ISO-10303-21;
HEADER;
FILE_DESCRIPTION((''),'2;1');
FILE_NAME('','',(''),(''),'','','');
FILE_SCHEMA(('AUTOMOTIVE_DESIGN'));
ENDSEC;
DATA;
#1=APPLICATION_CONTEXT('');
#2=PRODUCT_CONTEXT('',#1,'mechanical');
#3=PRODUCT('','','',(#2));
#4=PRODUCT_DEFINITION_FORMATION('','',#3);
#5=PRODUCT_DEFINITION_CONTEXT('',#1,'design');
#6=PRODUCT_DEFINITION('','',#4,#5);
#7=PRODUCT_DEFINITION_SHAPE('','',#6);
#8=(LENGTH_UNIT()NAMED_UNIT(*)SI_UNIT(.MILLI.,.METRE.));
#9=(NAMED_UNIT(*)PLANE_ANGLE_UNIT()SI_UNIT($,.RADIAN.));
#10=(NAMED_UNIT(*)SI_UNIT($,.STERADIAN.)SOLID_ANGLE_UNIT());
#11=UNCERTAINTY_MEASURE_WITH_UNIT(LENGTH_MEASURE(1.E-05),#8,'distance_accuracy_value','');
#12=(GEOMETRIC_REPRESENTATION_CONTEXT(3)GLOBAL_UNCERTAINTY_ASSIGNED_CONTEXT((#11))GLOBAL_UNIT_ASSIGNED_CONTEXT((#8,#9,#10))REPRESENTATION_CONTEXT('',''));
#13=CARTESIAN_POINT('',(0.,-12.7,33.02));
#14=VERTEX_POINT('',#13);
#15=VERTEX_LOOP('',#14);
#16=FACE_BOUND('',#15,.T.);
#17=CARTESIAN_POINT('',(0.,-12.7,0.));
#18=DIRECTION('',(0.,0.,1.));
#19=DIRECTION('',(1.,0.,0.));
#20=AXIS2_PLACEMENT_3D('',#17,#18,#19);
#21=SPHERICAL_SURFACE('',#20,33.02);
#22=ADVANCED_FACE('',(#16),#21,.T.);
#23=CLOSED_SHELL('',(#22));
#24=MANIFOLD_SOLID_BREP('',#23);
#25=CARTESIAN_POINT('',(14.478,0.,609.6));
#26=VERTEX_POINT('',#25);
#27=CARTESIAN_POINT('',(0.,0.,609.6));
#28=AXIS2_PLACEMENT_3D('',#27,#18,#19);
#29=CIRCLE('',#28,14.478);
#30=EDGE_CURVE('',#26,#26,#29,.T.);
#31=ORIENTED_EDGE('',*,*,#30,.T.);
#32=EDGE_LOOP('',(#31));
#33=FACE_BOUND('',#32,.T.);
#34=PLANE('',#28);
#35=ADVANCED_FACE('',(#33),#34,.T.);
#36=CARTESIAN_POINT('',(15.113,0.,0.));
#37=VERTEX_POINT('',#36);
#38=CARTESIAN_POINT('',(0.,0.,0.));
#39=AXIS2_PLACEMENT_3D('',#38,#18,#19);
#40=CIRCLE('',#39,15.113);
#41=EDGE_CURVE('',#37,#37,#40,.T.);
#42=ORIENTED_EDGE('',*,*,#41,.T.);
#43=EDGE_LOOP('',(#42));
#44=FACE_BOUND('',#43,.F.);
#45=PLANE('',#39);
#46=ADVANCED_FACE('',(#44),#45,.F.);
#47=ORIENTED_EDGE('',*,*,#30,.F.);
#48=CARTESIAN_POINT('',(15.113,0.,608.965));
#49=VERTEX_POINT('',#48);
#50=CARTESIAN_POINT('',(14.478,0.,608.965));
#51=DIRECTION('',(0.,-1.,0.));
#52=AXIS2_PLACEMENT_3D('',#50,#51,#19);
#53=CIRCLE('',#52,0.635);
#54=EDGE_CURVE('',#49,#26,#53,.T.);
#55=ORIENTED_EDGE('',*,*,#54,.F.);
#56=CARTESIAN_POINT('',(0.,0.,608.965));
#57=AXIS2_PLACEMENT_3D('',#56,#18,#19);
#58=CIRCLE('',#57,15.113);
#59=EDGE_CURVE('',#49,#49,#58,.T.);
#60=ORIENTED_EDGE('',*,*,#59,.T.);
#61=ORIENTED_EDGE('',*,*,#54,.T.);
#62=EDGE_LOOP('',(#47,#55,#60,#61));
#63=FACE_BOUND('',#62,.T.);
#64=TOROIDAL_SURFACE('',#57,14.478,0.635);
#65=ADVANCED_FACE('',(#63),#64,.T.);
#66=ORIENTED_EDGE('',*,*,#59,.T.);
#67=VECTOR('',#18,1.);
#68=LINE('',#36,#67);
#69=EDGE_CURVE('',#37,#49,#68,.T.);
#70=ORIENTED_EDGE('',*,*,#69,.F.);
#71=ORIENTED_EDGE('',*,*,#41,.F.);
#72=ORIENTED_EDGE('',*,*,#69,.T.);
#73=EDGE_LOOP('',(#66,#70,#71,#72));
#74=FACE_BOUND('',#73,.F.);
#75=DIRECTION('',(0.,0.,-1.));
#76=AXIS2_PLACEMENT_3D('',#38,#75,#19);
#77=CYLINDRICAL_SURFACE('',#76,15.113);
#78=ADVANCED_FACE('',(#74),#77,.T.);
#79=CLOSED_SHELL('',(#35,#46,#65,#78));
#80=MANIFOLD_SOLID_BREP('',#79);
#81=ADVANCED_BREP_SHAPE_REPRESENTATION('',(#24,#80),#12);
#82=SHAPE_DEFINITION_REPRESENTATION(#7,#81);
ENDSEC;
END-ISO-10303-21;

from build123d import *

# Parameters (mm, degrees)
F0_R     = 15.113
F1_DEPTH = 609.6
F2_R     = 0.635


# Not quite as in the source:
# - the program builds the solid bodies; features that only make, move or delete a surface that nothing else refers to are left out


with BuildPart() as f1:
    # F0 (on Top) → F1 (new body)
    with BuildSketch(Plane.XY):
        Circle(F0_R)
    extrude(amount=F1_DEPTH)

    # F2
    f2_edges = [f1.edges().sort_by_distance(p)[0] for p in [
        (-15.113, 0, 609.6),
    ]]
    fillet(f2_edges, radius=F2_R)


with BuildPart() as f7:
    # F6 (on offset) → F7 (revolve)
    with BuildSketch(Plane.XZ.offset(12.7)):
        with BuildLine():
            Line((0, 33.02), (0, -33.02))
            ThreePointArc((0, -33.02), (33.02, 0), (0, 33.02))
        make_face()
    revolve(axis=Axis((0, -12.7, 0), (0, 0, 1)))


solid = Compound([f1.part, f7.part])
